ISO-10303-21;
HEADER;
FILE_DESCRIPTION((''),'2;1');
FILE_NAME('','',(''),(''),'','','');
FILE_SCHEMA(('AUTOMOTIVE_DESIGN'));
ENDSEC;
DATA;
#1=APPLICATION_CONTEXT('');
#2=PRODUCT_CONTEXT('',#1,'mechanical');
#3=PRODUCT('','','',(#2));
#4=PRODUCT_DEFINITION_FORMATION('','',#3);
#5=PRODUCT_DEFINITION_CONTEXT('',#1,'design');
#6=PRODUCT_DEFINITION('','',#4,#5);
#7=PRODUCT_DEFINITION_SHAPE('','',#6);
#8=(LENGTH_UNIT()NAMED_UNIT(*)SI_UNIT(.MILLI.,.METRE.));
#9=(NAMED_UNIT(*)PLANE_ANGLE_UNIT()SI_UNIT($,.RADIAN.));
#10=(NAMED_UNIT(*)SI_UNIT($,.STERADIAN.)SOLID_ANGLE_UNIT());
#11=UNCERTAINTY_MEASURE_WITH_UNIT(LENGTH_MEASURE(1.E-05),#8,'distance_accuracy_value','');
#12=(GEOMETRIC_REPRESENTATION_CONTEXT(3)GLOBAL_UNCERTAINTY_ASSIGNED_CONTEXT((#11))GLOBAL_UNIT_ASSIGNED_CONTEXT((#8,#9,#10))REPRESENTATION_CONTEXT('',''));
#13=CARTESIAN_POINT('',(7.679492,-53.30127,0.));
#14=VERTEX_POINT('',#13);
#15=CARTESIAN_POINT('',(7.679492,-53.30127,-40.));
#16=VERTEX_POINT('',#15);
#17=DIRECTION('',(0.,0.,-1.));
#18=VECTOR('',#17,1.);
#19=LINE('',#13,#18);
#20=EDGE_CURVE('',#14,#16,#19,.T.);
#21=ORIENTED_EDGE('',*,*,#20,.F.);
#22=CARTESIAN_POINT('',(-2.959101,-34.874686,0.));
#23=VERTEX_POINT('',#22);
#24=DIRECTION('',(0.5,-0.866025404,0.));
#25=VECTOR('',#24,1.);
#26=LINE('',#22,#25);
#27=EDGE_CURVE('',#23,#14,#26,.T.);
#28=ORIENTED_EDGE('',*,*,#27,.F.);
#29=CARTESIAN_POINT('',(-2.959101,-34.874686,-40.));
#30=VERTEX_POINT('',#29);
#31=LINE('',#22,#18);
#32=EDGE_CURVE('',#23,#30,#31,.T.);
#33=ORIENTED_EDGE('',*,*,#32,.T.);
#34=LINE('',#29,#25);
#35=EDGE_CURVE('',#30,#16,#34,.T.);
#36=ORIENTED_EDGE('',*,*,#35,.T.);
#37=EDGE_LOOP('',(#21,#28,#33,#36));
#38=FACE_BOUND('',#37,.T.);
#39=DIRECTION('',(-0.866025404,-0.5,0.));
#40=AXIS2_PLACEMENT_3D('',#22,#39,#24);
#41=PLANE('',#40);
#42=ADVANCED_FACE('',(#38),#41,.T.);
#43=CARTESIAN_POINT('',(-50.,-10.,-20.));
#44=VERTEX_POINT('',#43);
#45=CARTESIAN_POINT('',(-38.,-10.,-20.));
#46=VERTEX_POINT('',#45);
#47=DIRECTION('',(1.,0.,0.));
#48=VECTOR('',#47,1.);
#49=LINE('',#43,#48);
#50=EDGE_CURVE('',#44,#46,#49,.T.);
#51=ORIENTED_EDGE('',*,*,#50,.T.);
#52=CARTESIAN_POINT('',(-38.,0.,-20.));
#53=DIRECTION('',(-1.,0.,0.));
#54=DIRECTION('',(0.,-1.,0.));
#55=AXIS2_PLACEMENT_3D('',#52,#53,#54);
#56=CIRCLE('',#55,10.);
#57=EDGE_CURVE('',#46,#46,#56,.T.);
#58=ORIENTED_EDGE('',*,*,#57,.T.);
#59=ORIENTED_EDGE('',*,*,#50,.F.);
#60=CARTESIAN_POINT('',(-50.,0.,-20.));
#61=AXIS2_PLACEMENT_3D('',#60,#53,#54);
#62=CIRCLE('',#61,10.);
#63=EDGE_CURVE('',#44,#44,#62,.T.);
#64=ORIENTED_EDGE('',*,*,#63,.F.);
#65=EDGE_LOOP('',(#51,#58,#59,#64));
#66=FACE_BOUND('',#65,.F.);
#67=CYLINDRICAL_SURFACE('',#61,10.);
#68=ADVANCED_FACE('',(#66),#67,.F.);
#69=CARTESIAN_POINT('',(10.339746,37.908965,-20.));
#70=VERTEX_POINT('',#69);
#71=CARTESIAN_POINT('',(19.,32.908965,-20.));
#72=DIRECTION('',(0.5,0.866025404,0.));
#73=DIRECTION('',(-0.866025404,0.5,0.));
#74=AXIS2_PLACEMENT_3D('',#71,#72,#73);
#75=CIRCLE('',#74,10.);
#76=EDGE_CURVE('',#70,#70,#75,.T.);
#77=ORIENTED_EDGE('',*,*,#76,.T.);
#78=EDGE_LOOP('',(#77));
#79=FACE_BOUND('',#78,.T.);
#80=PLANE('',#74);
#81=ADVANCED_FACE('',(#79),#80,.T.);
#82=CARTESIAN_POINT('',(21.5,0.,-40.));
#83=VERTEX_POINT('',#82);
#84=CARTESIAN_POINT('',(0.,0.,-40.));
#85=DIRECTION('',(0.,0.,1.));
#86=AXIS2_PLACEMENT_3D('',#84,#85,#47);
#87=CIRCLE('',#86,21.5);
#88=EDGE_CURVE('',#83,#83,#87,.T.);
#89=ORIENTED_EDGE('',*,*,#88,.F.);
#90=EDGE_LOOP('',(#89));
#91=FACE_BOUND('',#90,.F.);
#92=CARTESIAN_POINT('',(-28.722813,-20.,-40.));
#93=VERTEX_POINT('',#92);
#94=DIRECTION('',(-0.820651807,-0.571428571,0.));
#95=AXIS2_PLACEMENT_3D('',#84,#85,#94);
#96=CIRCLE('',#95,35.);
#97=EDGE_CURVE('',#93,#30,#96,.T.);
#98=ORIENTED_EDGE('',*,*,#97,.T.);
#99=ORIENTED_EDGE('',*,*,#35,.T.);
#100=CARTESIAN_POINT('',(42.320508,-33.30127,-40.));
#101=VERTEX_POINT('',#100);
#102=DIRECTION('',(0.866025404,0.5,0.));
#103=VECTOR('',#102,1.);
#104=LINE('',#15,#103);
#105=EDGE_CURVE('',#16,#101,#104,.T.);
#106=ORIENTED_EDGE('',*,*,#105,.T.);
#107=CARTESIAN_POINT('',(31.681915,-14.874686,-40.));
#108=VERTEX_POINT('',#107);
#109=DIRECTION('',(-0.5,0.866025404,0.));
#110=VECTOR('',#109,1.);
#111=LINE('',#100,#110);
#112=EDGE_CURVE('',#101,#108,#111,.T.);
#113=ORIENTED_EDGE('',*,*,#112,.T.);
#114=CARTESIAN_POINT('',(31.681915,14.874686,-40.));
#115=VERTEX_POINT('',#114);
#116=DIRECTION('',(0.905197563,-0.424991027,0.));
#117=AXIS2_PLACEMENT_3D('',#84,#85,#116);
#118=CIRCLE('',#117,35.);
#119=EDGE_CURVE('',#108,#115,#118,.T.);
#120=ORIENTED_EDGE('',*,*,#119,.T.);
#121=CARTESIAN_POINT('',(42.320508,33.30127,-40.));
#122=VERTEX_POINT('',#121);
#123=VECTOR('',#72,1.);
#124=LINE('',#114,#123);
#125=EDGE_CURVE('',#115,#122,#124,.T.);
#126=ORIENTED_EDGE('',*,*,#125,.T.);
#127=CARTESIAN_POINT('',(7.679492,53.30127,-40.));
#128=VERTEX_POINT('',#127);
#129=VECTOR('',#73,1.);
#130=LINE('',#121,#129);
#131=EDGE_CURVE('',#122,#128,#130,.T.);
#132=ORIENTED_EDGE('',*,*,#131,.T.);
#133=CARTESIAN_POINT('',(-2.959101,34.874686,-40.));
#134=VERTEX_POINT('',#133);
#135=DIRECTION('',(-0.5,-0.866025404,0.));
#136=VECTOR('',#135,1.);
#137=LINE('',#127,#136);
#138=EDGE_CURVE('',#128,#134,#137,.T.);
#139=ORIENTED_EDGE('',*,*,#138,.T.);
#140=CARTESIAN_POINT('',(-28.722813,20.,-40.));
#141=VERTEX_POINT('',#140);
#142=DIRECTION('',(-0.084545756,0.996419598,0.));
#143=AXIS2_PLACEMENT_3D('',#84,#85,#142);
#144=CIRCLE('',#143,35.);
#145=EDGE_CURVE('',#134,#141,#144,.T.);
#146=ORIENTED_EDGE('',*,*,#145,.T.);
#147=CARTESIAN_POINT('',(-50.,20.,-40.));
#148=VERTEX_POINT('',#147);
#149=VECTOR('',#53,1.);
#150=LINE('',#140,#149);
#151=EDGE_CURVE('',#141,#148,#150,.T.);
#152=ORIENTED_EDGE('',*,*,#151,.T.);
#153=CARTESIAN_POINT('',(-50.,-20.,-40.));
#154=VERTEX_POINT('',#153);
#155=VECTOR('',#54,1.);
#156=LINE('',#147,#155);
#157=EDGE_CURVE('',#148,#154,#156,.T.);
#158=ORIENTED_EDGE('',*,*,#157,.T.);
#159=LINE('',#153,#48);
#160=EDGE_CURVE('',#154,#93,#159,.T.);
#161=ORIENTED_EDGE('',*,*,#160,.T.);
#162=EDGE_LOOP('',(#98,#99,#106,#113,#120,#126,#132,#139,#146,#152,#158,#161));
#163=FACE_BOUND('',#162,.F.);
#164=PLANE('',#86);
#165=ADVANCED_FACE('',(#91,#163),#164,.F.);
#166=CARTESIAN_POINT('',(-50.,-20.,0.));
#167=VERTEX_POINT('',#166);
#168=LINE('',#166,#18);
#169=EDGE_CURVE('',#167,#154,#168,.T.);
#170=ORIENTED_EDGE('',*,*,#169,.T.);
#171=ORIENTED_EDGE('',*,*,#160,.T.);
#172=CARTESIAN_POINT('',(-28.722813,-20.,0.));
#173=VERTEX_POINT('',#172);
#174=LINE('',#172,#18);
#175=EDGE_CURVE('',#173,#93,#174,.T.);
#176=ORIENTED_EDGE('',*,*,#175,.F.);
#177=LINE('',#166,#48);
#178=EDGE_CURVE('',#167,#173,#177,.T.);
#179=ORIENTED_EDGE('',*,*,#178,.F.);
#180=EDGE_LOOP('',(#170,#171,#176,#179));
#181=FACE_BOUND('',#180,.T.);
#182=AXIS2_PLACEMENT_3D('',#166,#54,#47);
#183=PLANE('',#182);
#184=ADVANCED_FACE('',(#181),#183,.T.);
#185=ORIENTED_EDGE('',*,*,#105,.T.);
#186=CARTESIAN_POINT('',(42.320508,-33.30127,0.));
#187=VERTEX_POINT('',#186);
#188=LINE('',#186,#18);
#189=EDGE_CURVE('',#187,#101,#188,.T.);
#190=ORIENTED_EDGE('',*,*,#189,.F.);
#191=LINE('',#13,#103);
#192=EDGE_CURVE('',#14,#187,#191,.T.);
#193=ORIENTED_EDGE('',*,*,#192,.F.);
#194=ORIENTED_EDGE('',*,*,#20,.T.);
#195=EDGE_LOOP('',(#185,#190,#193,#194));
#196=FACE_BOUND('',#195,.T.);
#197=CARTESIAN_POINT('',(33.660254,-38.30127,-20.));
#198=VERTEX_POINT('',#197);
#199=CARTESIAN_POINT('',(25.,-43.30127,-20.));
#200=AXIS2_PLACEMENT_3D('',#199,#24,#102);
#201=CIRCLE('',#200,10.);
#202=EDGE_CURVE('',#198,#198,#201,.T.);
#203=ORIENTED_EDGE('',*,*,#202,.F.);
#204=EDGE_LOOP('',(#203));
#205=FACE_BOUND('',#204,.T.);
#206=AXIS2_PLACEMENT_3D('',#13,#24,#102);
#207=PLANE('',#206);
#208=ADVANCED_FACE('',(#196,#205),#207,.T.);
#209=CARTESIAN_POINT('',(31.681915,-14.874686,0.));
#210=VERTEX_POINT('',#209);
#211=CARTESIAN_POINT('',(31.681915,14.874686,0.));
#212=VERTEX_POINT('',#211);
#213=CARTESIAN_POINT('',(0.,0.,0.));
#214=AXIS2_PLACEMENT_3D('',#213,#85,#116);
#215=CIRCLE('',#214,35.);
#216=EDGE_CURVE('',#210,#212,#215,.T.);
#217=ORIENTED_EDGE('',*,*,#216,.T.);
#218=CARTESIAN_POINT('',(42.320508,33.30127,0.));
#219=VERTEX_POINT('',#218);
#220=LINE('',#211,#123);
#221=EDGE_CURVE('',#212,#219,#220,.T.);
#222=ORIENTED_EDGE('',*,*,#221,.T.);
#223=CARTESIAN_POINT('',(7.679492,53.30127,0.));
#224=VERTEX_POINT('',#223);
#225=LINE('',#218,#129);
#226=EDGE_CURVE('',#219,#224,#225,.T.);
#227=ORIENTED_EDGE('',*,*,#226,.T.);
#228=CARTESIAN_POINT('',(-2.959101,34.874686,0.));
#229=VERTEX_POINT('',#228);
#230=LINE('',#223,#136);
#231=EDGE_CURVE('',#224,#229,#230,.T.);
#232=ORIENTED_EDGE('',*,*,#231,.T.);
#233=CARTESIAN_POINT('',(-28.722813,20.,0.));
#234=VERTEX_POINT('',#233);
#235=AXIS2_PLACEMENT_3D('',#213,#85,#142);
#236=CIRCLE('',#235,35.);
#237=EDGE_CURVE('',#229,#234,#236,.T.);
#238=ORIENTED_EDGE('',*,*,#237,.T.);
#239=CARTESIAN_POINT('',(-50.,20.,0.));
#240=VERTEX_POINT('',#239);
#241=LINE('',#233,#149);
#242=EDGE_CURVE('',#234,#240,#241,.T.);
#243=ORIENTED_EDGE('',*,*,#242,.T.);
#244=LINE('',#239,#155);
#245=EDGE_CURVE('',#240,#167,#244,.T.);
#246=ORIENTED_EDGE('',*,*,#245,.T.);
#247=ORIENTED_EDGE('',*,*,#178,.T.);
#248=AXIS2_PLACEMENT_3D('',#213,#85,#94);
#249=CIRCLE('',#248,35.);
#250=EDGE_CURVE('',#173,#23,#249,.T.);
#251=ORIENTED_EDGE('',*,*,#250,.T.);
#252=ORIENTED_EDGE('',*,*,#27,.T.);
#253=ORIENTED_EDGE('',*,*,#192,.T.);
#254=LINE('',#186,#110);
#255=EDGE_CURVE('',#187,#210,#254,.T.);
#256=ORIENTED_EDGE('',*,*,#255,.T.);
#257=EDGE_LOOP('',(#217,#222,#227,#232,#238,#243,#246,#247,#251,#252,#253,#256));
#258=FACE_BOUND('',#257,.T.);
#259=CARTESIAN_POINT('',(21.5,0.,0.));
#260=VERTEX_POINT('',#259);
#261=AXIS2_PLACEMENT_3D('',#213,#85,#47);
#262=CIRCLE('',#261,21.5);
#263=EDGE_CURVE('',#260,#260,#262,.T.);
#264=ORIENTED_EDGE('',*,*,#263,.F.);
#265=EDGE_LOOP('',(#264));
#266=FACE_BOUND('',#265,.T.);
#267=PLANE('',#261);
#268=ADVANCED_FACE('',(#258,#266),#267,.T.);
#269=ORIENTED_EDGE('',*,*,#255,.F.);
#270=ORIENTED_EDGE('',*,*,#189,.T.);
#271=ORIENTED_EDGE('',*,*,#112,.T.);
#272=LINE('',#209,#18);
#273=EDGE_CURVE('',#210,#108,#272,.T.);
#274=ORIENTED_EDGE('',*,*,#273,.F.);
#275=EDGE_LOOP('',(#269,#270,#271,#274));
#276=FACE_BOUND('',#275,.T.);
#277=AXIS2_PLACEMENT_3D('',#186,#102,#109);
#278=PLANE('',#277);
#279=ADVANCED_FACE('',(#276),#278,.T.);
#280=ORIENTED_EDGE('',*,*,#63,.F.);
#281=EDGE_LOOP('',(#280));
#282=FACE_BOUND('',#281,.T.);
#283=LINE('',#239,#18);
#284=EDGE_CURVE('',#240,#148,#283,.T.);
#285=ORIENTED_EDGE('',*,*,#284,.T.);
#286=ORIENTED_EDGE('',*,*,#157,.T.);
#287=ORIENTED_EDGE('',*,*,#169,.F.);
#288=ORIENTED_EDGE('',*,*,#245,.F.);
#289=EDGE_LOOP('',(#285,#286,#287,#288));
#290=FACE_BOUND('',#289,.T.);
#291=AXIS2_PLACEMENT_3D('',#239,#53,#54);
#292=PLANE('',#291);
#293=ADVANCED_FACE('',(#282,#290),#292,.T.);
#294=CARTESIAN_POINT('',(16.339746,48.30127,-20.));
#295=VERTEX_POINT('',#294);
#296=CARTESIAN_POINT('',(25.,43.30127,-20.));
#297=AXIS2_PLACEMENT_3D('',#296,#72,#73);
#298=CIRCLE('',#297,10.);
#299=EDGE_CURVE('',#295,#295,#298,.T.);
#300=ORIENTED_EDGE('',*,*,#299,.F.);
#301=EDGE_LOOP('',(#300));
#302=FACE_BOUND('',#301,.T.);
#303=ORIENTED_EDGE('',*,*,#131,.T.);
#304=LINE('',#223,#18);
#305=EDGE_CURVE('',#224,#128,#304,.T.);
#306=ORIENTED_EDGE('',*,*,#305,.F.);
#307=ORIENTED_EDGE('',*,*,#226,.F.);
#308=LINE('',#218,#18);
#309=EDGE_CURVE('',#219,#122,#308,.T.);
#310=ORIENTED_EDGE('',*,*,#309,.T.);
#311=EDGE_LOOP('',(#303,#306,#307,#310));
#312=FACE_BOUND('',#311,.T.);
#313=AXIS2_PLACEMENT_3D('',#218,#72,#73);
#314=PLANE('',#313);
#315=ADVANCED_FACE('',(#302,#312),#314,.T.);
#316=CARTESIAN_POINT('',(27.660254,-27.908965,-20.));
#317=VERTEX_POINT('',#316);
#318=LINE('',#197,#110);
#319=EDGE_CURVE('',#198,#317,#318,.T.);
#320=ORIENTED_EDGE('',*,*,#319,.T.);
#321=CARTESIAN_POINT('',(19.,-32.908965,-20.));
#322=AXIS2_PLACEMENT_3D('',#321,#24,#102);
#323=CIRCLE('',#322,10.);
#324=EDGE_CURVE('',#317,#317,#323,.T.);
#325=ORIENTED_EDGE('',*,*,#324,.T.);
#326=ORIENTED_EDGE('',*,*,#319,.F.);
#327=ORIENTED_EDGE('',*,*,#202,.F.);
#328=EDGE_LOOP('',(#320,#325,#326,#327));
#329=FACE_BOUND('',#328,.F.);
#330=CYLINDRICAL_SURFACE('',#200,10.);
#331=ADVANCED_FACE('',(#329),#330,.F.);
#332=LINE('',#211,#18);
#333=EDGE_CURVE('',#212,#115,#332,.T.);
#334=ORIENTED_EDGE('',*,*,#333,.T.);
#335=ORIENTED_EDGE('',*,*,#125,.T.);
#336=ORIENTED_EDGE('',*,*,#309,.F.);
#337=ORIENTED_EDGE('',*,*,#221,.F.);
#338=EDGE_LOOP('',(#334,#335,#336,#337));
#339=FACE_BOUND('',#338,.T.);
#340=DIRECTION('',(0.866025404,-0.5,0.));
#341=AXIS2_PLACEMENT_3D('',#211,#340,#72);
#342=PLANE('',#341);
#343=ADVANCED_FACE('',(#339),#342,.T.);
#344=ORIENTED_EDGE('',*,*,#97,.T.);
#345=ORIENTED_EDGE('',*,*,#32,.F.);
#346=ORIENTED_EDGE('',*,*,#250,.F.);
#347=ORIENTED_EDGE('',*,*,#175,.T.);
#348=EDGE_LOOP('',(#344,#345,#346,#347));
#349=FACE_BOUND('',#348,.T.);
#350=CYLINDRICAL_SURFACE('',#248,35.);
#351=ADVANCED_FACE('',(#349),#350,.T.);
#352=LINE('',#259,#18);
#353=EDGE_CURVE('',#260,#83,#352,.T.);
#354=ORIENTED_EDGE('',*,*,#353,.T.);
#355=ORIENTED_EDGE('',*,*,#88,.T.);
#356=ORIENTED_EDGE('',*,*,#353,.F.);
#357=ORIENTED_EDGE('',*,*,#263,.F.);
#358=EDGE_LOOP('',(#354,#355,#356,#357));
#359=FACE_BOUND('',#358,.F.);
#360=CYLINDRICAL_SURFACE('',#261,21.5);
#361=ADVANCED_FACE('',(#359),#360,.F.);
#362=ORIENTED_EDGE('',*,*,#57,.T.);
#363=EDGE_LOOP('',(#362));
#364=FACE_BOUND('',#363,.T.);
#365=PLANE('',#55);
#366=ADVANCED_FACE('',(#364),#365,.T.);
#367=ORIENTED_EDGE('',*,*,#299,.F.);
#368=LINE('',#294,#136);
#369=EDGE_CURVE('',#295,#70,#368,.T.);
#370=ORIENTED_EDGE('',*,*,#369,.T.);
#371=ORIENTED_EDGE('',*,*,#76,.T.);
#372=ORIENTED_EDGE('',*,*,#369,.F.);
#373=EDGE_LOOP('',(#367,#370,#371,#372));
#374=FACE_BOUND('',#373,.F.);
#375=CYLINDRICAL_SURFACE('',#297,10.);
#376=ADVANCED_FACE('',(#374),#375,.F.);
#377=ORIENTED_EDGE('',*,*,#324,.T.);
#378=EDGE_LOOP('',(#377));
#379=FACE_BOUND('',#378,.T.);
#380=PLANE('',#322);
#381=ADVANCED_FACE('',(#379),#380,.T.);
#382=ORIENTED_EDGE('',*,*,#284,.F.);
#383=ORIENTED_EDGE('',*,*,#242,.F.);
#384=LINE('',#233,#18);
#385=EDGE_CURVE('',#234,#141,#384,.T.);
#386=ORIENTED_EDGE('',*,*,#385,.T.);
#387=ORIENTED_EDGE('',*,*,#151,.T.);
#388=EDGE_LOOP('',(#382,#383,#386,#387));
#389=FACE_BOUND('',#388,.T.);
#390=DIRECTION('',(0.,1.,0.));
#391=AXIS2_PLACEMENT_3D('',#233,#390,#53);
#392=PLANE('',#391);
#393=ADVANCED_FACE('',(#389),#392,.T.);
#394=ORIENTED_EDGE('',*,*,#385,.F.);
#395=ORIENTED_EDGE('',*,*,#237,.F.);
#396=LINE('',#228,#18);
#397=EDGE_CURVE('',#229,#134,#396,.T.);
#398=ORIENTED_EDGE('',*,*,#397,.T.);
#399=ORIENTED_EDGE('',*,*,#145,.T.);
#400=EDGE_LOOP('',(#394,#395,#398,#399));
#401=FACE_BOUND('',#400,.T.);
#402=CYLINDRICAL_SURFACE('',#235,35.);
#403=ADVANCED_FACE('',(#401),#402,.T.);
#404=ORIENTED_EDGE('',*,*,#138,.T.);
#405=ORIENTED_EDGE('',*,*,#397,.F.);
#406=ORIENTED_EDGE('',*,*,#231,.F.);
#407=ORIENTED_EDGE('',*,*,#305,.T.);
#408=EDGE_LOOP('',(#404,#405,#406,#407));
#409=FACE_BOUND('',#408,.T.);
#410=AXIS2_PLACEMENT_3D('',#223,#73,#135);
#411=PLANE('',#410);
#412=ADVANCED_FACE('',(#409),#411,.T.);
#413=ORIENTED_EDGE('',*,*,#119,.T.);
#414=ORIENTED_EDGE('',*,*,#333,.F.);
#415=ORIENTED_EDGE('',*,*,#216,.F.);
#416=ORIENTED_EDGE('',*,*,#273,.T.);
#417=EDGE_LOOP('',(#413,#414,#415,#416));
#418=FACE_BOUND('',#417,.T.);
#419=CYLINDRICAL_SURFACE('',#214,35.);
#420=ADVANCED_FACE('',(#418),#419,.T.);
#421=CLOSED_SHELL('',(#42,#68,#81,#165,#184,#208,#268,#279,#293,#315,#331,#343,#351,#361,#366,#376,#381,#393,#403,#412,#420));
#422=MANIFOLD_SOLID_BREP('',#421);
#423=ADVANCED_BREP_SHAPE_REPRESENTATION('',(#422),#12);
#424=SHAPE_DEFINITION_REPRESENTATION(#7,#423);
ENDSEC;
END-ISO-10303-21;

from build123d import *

# Parameters (mm, degrees)
F0_R     = 21.5
F1_DEPTH = 40
F2_R     = 10
F5_DEPTH = 12
F3_R     = 10
F6_DEPTH = 12
F4_R     = 10
F7_DEPTH = 12


# Not quite as in the source:
# - a feature names something its author has since deleted; it is built from what else it names


with BuildPart() as f1:
    # F0 (on Top) → F1 (new body)
    with BuildSketch(Plane.XY):
        with BuildLine():
            Line((7.6794919243, 53.3012701892), (-2.9591014593, 34.8746859277))
            ThreePointArc((-2.9591014593, 34.8746859277), (-17.5, 30.3108891325), (-28.7228132327, 20))
            Line((-28.7228132327, 20), (-50, 20))
            Line((-50, 20), (-50, -20))
            Line((-50, -20), (-28.7228132327, -20))
            ThreePointArc((-28.7228132327, -20), (-17.5, -30.3108891325), (-2.9591014593, -34.8746859277))
            Line((-2.9591014593, -34.8746859277), (7.6794919243, -53.3012701892))
            Line((7.6794919243, -53.3012701892), (42.3205080757, -33.3012701892))
            Line((42.3205080757, -33.3012701892), (31.681914692, -14.8746859277))
            ThreePointArc((31.681914692, -14.8746859277), (35, 0), (31.681914692, 14.8746859277))
            Line((31.681914692, 14.8746859277), (42.3205080757, 33.3012701892))
            Line((42.3205080757, 33.3012701892), (7.6794919243, 53.3012701892))
        make_face()
        Circle(F0_R, mode=Mode.SUBTRACT)
    extrude(amount=-F1_DEPTH)

    # F2 (on face) → F5 (cut)
    with BuildSketch(Plane(origin=(-50, 0, 0), x_dir=(0, -1, 0), z_dir=(-1, 0, 0))):
        with Locations((0, -20)):
            Circle(F2_R)
    extrude(amount=-F5_DEPTH, mode=Mode.SUBTRACT)

    # F3 (on face) → F6 (cut)
    with BuildSketch(Plane(origin=(25, -43.3012701892, 0), x_dir=(0.8660254038, 0.5, 0), z_dir=(0.5, -0.8660254038, 0))):
        with Locations((0, -20)):
            Circle(F3_R)
    extrude(amount=-F6_DEPTH, mode=Mode.SUBTRACT)

    # F4 (on face) → F7 (cut)
    with BuildSketch(Plane(origin=(25, 43.3012701892, 0), x_dir=(-0.8660254038, 0.5, 0), z_dir=(0.5, 0.8660254038, 0))):
        with Locations((0, -20)):
            Circle(F4_R)
    extrude(amount=-F7_DEPTH, mode=Mode.SUBTRACT)


solid = f1.part
